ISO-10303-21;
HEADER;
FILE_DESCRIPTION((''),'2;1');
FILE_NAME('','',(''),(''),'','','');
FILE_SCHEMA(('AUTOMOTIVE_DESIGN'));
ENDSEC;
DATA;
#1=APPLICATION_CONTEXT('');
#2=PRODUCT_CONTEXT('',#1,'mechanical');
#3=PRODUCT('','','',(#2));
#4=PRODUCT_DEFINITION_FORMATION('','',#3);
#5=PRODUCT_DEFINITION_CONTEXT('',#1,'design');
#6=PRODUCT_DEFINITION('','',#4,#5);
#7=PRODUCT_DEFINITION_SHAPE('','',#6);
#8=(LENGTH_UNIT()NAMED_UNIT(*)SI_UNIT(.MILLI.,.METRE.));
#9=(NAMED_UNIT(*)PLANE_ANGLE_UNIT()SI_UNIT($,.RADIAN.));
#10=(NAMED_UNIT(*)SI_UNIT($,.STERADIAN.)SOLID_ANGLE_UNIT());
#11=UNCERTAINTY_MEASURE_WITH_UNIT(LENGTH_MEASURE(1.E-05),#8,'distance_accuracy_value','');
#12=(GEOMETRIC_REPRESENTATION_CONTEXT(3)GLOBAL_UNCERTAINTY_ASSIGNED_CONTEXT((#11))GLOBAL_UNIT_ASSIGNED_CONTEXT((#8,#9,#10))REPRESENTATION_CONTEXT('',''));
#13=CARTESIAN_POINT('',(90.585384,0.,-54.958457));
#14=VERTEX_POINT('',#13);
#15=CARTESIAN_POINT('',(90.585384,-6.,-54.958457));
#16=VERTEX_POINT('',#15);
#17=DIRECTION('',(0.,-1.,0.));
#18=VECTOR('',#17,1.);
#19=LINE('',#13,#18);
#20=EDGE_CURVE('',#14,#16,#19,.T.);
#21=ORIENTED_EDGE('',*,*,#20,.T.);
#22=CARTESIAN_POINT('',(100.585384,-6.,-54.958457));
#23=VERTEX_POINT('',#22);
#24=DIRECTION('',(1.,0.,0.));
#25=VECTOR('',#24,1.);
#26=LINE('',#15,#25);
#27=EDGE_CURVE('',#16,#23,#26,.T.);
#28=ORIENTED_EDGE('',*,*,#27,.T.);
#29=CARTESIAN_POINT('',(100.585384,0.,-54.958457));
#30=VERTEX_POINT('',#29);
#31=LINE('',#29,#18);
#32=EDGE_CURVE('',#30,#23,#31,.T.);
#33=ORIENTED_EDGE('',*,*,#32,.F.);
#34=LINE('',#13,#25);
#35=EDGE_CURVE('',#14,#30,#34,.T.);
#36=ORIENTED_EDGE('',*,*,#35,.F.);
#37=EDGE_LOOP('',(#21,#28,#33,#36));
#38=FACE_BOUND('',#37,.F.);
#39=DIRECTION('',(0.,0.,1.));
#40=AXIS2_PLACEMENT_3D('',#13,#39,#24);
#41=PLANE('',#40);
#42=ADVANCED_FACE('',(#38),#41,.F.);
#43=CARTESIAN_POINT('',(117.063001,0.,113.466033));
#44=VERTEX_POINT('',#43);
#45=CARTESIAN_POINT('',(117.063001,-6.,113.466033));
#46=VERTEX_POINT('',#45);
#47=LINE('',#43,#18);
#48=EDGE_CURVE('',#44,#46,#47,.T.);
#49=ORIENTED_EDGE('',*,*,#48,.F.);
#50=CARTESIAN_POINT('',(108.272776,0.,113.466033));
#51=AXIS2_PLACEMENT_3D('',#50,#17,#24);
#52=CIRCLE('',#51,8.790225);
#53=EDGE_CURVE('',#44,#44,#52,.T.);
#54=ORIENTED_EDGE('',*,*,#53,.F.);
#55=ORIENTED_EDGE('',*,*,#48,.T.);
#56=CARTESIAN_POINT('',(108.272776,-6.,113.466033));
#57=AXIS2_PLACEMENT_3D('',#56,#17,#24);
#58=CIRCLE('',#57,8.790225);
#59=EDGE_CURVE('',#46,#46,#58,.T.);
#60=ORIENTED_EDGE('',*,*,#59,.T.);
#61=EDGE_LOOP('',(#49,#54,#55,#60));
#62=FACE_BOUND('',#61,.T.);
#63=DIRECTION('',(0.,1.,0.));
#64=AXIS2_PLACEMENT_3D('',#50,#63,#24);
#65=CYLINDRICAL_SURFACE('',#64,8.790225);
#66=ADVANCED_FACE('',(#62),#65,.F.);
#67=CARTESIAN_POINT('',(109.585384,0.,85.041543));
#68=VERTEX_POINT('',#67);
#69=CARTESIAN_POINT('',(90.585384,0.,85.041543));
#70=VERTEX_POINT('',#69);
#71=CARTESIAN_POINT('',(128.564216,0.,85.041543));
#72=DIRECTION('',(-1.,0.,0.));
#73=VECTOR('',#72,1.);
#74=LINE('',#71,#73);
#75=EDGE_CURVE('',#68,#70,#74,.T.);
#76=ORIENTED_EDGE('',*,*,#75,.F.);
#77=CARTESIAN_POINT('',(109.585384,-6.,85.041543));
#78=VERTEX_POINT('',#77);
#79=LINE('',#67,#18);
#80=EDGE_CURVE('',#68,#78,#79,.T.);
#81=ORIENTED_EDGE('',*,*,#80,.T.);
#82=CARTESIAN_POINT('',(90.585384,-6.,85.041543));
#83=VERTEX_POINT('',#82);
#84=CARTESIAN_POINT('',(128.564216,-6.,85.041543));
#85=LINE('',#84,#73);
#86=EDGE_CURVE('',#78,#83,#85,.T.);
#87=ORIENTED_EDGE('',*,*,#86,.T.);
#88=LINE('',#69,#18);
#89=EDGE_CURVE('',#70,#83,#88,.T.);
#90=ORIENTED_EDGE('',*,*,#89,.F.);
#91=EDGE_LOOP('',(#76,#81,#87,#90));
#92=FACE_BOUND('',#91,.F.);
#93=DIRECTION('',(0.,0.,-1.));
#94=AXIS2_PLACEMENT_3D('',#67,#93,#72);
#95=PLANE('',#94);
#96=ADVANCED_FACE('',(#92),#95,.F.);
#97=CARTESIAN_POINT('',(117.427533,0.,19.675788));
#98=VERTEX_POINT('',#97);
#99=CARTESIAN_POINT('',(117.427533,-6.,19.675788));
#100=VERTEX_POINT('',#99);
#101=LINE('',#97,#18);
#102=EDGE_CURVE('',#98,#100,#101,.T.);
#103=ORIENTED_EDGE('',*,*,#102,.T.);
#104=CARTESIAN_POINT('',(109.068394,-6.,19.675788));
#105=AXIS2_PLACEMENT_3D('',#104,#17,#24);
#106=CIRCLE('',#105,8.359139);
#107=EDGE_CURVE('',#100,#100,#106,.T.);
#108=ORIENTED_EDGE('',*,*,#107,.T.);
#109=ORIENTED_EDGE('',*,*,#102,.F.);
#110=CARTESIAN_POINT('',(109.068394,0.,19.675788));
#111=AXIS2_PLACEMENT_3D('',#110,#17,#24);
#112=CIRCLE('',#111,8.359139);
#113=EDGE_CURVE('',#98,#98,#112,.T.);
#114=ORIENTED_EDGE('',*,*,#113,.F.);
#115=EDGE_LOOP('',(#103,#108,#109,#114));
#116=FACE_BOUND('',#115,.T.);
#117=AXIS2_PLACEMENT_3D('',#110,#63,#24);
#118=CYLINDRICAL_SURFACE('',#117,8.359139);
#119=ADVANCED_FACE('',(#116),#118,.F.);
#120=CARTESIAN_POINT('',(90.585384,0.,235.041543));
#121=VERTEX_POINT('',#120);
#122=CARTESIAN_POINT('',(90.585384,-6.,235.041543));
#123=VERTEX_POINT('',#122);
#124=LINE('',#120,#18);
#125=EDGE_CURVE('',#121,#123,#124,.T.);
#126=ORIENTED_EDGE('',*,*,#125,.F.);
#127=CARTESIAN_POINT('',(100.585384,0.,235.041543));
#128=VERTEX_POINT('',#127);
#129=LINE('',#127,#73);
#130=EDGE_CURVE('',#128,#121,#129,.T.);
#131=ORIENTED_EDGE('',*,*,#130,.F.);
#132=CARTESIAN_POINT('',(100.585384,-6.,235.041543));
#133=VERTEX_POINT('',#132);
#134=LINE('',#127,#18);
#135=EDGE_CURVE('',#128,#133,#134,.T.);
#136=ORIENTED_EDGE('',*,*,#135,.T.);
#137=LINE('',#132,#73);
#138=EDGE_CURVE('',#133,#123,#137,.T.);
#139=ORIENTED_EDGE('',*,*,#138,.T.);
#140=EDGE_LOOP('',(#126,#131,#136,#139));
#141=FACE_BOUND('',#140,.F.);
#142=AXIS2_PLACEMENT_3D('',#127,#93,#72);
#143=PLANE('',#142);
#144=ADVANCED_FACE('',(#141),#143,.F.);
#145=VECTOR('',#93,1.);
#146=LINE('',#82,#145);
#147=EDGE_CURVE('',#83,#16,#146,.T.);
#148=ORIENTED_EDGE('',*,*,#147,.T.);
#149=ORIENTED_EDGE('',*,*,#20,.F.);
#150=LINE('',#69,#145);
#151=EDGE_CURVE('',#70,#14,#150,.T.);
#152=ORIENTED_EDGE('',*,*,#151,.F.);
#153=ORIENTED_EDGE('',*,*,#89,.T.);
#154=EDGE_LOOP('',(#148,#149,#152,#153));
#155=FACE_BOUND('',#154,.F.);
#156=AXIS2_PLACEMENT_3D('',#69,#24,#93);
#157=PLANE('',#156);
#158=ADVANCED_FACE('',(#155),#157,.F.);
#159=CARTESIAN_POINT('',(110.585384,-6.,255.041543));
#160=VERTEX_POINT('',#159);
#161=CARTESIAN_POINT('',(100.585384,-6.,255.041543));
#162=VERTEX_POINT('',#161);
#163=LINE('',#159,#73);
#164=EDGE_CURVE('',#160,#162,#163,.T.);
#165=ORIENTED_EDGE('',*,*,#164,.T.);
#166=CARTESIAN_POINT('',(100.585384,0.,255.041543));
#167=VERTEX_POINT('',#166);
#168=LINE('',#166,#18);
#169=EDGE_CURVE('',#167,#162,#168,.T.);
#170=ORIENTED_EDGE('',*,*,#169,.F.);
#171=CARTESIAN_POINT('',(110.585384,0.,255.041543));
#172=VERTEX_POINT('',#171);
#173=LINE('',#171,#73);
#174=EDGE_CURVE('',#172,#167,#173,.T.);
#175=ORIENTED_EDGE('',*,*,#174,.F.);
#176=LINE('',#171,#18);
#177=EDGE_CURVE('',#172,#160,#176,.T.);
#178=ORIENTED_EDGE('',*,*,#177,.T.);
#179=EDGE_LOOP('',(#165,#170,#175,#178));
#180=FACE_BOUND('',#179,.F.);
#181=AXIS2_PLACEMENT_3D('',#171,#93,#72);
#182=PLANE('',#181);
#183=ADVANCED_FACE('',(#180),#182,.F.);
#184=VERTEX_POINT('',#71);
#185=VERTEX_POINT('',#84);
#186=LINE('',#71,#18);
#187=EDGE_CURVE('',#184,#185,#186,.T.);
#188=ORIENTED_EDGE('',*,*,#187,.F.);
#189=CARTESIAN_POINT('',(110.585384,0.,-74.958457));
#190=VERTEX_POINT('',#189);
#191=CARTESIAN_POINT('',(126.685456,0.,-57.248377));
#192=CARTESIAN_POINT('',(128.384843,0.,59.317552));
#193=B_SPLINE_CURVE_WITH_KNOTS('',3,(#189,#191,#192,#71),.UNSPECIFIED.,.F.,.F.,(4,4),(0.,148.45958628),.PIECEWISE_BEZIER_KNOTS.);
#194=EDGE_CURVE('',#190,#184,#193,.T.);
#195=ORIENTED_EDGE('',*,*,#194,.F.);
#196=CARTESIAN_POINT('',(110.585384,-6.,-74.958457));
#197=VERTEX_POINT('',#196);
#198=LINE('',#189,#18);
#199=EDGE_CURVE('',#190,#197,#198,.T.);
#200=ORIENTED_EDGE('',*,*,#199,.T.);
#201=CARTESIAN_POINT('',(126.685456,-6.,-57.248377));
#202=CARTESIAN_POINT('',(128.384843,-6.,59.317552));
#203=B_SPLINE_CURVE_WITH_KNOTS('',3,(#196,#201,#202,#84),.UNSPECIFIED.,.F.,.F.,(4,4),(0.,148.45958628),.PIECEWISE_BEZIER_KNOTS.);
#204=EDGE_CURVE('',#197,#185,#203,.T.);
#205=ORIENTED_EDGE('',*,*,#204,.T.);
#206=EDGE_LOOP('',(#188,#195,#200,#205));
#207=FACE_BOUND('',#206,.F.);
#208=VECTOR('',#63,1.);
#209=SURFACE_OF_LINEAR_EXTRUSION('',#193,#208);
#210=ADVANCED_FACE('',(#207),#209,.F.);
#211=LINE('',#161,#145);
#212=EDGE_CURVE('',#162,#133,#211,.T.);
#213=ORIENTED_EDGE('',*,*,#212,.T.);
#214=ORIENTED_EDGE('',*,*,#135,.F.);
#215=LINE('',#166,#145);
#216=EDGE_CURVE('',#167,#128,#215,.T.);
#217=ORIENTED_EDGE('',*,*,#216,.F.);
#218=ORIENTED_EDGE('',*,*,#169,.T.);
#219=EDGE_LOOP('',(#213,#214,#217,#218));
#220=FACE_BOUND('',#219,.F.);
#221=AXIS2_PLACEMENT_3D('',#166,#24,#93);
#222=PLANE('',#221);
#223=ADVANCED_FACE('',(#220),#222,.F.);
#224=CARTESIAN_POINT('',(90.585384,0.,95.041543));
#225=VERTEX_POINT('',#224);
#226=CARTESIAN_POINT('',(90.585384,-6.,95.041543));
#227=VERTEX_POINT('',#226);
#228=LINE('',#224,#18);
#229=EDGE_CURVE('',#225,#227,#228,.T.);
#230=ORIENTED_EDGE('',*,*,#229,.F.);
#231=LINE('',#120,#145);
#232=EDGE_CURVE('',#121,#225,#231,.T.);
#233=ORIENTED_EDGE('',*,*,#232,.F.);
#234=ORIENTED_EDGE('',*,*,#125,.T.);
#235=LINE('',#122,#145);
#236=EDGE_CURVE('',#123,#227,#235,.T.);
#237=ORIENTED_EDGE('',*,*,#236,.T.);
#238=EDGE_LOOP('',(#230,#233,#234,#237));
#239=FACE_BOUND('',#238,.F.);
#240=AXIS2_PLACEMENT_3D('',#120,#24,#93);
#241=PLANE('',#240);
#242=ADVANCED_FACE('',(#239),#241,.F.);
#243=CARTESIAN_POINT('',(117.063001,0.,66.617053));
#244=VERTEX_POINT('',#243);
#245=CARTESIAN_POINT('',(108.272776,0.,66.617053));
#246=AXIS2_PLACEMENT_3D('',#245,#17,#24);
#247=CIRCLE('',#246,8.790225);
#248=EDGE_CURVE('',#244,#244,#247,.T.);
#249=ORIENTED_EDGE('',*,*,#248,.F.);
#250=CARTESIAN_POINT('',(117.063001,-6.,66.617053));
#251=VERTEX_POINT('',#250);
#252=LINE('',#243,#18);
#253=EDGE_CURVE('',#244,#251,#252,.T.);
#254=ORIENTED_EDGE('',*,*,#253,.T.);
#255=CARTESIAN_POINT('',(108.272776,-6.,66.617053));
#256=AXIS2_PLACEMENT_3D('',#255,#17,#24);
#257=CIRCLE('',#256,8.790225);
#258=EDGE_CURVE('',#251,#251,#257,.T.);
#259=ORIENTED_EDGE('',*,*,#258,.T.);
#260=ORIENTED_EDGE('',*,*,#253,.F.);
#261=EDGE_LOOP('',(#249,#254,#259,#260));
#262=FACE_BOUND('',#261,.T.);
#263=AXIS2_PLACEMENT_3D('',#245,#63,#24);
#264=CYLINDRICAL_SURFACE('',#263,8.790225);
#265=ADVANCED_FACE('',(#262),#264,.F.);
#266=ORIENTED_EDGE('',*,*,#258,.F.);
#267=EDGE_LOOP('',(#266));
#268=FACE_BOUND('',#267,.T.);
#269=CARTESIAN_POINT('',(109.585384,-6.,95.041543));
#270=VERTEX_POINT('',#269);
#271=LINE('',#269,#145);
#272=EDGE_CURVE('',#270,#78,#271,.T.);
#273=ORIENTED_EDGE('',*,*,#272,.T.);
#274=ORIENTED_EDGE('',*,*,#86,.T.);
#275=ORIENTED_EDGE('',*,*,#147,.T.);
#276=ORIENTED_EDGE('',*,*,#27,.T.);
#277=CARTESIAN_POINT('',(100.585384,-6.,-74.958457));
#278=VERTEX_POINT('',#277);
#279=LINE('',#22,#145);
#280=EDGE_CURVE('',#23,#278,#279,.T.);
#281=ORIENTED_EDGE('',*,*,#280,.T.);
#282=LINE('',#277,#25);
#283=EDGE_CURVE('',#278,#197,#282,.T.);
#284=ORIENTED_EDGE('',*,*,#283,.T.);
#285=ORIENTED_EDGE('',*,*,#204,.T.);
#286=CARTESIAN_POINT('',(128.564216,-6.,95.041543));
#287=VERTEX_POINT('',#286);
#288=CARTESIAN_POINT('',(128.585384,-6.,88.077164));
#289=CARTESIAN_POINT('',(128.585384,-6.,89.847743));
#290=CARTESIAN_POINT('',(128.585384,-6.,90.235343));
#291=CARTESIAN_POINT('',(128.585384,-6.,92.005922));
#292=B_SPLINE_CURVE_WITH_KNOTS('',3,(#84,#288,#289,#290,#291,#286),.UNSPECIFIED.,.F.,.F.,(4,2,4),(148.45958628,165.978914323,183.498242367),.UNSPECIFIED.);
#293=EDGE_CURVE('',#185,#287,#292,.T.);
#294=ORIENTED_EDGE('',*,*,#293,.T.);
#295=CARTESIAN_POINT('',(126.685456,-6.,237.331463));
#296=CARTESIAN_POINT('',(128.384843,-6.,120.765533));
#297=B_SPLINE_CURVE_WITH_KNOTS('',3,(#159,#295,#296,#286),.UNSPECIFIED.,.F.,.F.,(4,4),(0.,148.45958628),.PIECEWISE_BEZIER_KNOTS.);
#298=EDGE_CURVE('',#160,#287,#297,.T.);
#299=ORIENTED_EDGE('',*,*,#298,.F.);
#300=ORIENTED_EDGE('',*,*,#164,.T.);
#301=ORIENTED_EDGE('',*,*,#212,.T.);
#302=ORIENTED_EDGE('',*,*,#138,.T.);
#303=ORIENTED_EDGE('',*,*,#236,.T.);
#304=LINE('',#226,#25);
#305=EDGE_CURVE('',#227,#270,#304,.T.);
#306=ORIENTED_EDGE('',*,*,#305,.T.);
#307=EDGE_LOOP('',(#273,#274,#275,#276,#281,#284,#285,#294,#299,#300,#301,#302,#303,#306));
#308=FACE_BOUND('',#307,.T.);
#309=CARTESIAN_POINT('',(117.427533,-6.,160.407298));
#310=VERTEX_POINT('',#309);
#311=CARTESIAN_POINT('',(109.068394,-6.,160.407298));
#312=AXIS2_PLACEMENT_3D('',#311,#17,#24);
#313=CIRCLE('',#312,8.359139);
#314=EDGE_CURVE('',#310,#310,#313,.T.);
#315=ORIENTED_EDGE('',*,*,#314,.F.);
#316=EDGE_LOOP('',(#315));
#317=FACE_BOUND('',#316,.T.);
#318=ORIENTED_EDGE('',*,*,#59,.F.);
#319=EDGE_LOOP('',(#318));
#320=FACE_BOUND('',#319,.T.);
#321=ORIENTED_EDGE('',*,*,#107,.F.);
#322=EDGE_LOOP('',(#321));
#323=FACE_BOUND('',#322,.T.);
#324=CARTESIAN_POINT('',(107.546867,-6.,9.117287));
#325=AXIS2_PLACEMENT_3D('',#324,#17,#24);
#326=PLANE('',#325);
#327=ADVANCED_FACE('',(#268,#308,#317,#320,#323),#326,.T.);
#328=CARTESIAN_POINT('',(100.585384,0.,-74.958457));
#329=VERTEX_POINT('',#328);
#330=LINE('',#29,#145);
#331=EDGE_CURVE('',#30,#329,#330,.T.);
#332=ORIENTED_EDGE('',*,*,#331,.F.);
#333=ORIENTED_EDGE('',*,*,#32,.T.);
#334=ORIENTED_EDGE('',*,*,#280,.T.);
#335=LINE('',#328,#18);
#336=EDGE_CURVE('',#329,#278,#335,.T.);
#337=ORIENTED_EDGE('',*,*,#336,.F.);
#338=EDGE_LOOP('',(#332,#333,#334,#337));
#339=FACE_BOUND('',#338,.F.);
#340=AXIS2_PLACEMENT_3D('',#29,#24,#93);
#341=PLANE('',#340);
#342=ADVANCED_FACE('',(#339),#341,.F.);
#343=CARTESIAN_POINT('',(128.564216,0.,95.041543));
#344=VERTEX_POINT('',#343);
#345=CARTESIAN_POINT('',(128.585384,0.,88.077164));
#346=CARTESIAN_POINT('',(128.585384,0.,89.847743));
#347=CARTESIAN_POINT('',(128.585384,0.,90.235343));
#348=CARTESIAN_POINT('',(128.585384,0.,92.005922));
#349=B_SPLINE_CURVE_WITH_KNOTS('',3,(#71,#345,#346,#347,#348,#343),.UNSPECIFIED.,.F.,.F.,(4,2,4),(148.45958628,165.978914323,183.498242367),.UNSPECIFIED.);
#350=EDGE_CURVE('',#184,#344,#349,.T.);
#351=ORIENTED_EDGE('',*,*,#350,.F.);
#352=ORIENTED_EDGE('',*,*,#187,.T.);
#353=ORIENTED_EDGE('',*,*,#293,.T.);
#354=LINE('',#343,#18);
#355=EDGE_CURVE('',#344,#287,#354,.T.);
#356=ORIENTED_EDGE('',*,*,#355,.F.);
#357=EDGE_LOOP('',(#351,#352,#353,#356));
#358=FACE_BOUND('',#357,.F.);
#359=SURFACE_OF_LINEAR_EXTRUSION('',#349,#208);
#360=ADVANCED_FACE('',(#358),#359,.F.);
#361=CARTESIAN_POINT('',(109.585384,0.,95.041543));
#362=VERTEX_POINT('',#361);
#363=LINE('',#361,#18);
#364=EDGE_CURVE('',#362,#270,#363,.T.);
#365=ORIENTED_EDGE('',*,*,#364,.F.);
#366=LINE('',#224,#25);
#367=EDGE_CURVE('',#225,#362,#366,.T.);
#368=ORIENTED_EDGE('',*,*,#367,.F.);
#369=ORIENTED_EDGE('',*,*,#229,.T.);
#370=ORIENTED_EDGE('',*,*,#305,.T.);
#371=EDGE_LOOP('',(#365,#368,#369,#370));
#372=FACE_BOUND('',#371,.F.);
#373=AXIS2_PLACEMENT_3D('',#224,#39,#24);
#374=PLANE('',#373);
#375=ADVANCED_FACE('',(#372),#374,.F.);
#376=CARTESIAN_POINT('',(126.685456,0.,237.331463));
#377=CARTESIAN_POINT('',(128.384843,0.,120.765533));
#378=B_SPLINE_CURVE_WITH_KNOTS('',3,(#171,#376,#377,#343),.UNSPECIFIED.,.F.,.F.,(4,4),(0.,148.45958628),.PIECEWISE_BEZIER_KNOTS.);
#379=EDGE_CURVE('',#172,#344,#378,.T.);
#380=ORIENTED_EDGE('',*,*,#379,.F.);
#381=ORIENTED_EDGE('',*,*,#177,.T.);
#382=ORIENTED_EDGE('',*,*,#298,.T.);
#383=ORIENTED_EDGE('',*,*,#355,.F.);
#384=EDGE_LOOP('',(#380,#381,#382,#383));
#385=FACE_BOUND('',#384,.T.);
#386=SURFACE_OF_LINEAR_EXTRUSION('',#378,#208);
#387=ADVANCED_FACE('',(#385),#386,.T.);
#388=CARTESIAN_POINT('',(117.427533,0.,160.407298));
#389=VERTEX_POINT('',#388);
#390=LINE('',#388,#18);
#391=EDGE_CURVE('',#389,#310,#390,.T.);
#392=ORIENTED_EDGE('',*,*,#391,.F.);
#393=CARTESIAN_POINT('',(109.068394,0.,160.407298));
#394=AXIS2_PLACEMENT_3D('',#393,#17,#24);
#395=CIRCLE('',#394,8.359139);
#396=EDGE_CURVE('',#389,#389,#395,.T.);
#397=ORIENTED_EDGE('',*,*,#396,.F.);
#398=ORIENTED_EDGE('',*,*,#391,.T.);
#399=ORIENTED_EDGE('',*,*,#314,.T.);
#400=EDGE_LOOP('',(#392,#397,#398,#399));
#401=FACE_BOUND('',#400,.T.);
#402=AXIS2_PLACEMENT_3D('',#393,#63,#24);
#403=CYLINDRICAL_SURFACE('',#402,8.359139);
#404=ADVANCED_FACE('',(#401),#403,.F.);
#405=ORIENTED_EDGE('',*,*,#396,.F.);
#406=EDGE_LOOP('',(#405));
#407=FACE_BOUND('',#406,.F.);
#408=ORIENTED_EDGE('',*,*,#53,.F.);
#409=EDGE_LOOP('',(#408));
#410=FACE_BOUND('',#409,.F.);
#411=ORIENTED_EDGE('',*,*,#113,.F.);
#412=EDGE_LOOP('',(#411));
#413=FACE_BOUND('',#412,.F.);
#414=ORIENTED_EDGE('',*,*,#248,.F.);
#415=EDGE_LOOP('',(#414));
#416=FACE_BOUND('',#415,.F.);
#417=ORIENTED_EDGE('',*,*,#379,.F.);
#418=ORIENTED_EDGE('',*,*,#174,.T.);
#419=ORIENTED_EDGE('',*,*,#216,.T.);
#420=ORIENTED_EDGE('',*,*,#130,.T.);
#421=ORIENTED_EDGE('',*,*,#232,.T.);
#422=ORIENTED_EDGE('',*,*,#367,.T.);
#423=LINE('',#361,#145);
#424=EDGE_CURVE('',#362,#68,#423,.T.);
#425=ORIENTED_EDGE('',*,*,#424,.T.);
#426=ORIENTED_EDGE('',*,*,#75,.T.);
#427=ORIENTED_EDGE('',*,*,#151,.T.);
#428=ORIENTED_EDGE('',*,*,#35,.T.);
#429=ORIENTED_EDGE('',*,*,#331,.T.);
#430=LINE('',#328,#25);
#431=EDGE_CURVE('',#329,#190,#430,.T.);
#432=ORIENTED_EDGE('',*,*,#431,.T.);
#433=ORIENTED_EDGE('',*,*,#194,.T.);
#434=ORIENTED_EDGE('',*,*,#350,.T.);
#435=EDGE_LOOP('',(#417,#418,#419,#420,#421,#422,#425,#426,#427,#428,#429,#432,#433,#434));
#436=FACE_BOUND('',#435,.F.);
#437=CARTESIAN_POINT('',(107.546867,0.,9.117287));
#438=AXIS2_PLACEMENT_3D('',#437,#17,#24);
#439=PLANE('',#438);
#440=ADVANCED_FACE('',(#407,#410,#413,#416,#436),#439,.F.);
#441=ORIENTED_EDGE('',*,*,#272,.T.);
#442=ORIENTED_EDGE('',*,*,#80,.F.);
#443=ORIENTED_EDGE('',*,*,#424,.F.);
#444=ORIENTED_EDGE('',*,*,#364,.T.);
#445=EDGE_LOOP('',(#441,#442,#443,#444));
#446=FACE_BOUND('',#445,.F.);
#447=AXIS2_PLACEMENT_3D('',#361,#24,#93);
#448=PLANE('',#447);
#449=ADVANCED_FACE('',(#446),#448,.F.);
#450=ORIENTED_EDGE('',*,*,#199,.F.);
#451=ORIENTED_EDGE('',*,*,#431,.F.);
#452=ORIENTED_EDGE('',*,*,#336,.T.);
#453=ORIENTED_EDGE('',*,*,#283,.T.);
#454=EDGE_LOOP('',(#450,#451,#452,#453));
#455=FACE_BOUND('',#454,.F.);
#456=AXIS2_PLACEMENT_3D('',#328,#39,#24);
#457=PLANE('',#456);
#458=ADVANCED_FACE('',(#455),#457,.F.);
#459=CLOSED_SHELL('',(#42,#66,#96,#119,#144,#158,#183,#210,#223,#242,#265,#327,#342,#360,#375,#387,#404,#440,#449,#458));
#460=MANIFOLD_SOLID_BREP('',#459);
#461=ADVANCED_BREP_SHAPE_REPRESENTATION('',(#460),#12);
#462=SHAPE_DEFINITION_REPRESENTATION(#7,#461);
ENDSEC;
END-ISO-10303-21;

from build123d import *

# Parameters (mm, degrees)
F0_R     = 8.3591394984
F0_R_2   = 8.7902247906
F1_DEPTH = 6


# Not quite as in the source:
# - a feature names something its author has since deleted; it is built from what else it names


with BuildPart() as f1:
    # F0 (on Front) → F1 (new body)
    with BuildSketch(Plane.XZ):
        with BuildLine():
            Line((100.5853836174, -74.9584571321), (110.5853836174, -74.9584571321))
            add(Edge.make_bspline(
                [(110.5853836174, -74.9584571321), (126.6854561112, -57.248377389), (128.3848433658, 59.317552439), (128.5642162874, 85.0415428679)],
                knots=[0, 0, 0, 0, 148.4595862799, 148.4595862799, 148.4595862799, 148.4595862799], degree=3))
            Line((128.5642162874, 85.0415428679), (109.5853836174, 85.0415428679))
            Line((109.5853836174, 85.0415428679), (90.5853836174, 85.0415428679))
            Line((90.5853836174, 85.0415428679), (90.5853836174, -54.9584571321))
            Line((90.5853836174, -54.9584571321), (100.5853836174, -54.9584571321))
            Line((100.5853836174, -54.9584571321), (100.5853836174, -74.9584571321))
        make_face()
        with Locations((109.0683937073, 19.6757875151)):
            Circle(F0_R, mode=Mode.SUBTRACT)
        with Locations((108.2727760077, 66.6170529789)):
            Circle(F0_R_2, mode=Mode.SUBTRACT)
        with BuildLine():
            add(Edge.make_bspline(
                [(128.5642162874, 85.0415428679), (128.5853836174, 88.0771637948), (128.5853836174, 89.8477431573), (128.5853836174, 90.0415428679)],
                knots=[148.4595862799, 148.4595862799, 148.4595862799, 148.4595862799, 165.9789143235, 165.9789143235, 165.9789143235, 165.9789143235], degree=3))
            Line((128.5853836174, 90.0415428679), (109.5853836174, 90.0415428679))
            Line((109.5853836174, 90.0415428679), (109.5853836174, 85.0415428679))
            Line((109.5853836174, 85.0415428679), (128.5642162874, 85.0415428679))
        make_face()
        with BuildLine():
            Line((109.5853836174, 90.0415428679), (128.5853836174, 90.0415428679))
            add(Edge.make_bspline(
                [(128.5642162874, 95.0415428679), (128.5853836174, 92.005921941), (128.5853836174, 90.2353425785), (128.5853836174, 90.0415428679)],
                knots=[148.4595862799, 148.4595862799, 148.4595862799, 148.4595862799, 165.9789143235, 165.9789143235, 165.9789143235, 165.9789143235], degree=3))
            Line((128.5642162874, 95.0415428679), (109.5853836174, 95.0415428679))
            Line((109.5853836174, 95.0415428679), (109.5853836174, 90.0415428679))
        make_face()
        with BuildLine():
            Line((109.5853836174, 95.0415428679), (128.5642162874, 95.0415428679))
            add(Edge.make_bspline(
                [(110.5853836174, 255.0415428679), (126.6854561112, 237.3314631248), (128.3848433658, 120.7655332968), (128.5642162874, 95.0415428679)],
                knots=[0, 0, 0, 0, 148.4595862799, 148.4595862799, 148.4595862799, 148.4595862799], degree=3))
            Line((110.5853836174, 255.0415428679), (100.5853836174, 255.0415428679))
            Line((100.5853836174, 255.0415428679), (100.5853836174, 235.0415428679))
            Line((100.5853836174, 235.0415428679), (90.5853836174, 235.0415428679))
            Line((90.5853836174, 235.0415428679), (90.5853836174, 95.0415428679))
            Line((90.5853836174, 95.0415428679), (109.5853836174, 95.0415428679))
        make_face()
        with Locations((108.2727760077, 113.4660327569)):
            Circle(F0_R_2, mode=Mode.SUBTRACT)
        with Locations((109.0683937073, 160.4072982207)):
            Circle(F0_R, mode=Mode.SUBTRACT)
    extrude(amount=F1_DEPTH)


solid = f1.part
